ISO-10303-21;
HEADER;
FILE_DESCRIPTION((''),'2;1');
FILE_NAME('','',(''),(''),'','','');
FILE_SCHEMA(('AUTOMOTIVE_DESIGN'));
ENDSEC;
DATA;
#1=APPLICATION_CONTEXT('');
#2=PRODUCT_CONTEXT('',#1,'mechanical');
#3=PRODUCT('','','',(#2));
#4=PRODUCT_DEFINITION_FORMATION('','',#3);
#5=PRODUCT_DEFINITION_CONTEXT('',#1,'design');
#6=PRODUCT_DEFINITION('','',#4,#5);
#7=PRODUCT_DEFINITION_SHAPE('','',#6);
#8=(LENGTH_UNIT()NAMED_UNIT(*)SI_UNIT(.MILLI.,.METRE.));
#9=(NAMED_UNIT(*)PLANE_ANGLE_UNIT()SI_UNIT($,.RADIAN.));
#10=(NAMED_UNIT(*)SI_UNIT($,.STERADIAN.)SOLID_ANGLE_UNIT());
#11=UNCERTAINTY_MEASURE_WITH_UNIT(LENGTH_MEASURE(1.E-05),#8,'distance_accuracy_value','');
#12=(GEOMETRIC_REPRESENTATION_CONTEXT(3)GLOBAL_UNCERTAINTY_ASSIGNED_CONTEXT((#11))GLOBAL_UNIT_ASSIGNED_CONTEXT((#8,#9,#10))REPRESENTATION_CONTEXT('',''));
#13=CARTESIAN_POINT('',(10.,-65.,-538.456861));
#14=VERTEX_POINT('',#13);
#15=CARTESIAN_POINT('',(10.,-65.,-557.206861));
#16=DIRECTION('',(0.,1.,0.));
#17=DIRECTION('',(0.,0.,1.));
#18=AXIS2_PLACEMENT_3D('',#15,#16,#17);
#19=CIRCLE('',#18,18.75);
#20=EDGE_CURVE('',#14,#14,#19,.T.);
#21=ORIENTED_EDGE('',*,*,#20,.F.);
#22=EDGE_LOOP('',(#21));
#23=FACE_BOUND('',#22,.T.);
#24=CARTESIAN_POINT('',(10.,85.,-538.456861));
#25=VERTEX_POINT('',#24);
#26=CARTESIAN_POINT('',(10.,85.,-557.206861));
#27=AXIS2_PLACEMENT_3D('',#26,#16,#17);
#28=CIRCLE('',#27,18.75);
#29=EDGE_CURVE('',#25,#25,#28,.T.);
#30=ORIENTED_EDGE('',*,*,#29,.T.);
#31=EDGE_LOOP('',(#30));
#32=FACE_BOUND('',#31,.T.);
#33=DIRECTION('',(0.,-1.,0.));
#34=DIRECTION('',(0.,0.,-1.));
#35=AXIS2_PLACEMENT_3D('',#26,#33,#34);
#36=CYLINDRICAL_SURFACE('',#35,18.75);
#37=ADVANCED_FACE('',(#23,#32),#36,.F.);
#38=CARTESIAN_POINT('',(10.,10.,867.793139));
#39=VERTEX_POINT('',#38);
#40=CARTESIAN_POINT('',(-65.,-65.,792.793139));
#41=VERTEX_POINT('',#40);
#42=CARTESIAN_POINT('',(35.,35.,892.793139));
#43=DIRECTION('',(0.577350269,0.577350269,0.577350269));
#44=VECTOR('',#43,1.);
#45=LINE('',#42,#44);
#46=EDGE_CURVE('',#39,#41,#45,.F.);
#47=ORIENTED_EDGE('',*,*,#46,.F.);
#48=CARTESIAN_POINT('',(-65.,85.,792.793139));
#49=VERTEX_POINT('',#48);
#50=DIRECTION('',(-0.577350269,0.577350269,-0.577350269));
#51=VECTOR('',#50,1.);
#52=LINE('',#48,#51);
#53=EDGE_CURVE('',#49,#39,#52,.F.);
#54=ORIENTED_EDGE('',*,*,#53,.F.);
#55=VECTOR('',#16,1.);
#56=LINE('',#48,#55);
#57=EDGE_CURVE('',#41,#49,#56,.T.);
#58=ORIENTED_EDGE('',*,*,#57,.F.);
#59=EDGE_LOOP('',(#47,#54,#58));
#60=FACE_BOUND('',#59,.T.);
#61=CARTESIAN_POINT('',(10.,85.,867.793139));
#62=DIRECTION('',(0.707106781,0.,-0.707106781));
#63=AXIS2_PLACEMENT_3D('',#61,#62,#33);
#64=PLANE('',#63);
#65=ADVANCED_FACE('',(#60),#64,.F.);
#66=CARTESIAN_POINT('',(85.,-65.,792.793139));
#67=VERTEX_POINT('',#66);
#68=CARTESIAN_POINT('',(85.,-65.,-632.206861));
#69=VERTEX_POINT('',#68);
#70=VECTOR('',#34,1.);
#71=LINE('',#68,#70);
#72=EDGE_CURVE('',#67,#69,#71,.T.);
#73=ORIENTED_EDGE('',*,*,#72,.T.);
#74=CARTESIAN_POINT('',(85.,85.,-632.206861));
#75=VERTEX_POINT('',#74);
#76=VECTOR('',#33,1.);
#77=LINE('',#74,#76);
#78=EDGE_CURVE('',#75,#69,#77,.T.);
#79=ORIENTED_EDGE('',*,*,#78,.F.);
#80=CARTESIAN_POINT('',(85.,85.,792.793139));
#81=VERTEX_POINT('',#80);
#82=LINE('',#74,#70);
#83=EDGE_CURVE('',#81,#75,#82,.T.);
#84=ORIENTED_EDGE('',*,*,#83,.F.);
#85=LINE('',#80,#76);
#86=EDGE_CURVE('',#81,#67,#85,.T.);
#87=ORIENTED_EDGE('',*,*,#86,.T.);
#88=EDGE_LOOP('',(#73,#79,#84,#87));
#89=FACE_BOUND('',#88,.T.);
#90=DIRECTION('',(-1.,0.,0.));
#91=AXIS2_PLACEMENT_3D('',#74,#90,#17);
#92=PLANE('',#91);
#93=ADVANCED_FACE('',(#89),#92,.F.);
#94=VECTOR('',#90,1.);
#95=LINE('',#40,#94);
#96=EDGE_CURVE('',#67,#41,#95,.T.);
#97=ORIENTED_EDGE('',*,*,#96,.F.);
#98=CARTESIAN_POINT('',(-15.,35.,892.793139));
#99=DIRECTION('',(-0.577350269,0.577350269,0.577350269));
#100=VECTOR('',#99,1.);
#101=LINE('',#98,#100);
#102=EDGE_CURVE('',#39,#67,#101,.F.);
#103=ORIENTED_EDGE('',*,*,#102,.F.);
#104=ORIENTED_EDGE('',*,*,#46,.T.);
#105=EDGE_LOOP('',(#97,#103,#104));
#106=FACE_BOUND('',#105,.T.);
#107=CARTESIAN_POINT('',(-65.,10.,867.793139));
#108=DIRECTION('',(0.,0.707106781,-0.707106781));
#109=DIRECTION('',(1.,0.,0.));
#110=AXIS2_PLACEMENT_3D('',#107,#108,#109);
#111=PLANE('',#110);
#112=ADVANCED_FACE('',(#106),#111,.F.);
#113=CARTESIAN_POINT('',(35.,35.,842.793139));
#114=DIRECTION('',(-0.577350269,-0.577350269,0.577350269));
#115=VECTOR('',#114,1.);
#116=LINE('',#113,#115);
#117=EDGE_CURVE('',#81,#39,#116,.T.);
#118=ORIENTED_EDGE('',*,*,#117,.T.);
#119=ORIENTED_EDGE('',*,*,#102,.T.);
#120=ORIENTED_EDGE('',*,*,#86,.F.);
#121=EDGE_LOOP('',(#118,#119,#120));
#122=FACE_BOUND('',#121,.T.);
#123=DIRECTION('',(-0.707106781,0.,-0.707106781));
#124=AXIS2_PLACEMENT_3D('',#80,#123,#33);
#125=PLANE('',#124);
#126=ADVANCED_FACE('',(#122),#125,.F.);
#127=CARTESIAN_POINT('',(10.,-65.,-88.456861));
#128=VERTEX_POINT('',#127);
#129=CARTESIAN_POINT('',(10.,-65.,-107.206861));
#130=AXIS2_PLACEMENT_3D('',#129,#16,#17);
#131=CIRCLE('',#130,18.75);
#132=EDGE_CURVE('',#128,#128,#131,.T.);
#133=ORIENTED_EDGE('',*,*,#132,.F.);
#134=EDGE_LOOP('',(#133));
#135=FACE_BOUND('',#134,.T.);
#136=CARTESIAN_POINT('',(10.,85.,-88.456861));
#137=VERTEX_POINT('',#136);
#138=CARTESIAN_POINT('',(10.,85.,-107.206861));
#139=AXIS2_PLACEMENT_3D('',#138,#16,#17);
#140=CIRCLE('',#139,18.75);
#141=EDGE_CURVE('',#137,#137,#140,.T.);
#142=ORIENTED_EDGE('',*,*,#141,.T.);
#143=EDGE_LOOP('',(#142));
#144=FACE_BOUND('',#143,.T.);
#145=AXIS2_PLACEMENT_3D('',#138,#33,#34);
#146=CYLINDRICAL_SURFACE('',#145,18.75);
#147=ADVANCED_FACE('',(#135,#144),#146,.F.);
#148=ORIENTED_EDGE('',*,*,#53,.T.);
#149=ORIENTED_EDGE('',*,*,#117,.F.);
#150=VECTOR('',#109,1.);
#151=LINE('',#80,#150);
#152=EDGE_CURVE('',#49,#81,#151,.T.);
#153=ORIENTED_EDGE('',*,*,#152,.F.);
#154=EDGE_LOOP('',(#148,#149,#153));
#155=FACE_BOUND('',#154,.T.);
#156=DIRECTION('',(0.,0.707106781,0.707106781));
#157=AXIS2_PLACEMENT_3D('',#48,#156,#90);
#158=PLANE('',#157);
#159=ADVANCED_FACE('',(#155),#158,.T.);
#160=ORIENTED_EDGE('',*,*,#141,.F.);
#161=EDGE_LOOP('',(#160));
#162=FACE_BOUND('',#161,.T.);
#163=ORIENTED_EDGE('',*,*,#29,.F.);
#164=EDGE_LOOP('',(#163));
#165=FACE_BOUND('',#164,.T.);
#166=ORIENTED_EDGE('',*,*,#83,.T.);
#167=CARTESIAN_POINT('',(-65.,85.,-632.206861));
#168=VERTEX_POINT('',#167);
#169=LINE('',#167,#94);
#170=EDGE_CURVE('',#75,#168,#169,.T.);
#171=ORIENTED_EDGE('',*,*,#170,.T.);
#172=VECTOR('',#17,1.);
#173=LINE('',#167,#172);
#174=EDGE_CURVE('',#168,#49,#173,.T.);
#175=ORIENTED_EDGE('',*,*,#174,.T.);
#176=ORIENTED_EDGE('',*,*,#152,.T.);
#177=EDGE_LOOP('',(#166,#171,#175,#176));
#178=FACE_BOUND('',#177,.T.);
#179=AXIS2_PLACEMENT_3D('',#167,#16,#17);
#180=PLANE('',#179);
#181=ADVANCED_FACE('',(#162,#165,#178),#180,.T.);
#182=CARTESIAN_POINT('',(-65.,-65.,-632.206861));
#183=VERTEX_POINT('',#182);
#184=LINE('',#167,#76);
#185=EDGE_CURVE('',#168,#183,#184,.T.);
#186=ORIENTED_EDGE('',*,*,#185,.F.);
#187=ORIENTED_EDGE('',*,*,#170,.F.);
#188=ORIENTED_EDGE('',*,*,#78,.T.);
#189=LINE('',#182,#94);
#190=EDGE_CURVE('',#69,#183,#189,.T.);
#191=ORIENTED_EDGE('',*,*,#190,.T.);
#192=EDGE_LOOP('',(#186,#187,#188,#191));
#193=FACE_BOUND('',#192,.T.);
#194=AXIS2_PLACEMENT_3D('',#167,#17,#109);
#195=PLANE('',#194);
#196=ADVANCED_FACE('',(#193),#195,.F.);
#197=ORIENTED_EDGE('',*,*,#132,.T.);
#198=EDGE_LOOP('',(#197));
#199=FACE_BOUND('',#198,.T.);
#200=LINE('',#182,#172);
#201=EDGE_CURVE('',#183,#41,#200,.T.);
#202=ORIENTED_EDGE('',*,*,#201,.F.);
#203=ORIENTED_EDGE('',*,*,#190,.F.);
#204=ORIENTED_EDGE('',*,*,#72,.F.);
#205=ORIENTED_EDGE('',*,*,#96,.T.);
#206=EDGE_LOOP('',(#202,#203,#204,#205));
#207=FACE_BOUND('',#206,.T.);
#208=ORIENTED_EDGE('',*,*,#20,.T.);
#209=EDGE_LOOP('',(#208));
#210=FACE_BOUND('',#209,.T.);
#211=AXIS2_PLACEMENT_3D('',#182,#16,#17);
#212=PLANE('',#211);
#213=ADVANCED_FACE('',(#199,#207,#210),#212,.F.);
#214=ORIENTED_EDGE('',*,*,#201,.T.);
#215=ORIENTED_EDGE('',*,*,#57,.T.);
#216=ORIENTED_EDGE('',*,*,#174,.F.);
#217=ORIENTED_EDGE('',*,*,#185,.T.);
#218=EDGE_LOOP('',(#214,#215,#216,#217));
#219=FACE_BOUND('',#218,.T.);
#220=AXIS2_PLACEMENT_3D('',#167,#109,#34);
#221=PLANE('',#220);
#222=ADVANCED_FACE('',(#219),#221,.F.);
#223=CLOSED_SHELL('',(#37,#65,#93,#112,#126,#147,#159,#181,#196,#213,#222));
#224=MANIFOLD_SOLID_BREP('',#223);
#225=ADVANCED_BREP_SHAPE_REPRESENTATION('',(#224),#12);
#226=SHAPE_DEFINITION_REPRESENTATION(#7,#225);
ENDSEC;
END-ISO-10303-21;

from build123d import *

# Parameters (mm, degrees)
SKETCH1_W           = 20
SKETCH1_H           = 200
SKETCH1_R           = 2.5
BOSS_EXTRUDE1_DEPTH = 20
CHAMFER1_SIZE       = 10
SCALE1_SCALE        = 7.5


with BuildPart() as part:
    # Sketch1 → Boss-Extrude1 (new body)
    with BuildSketch(Plane(origin=(0, 0, 0), x_dir=(1, 0, 0), z_dir=(0, 1, 0))):
        with Locations((10, -100)):
            Rectangle(SKETCH1_W, SKETCH1_H)
        with Locations(Location((10, -10, 0), (0, 0, 270))):
            Circle(SKETCH1_R, mode=Mode.SUBTRACT)
        with Locations(Location((10, -70, 0), (0, 0, 270))):
            Circle(SKETCH1_R, mode=Mode.SUBTRACT)
    extrude(amount=BOSS_EXTRUDE1_DEPTH)

    # Chamfer1
    chamfer1_edges = [part.edges().sort_by_distance(p)[0] for p in [
        (10, 0, 200),
        (10, 20, 200),
        (20, 10, 200),
        (0, 10, 200),
    ]]
    chamfer(chamfer1_edges, length=CHAMFER1_SIZE - 0.0001)  # a hair under: the kernel refuses the full size


with BuildPart() as part_1:
    # Scale1: scaled about (10, 10, 97.262644204)
    add(part.part.scale(SCALE1_SCALE).moved(Location((-65, -65, -632.207187326))))


solid = part_1.part
